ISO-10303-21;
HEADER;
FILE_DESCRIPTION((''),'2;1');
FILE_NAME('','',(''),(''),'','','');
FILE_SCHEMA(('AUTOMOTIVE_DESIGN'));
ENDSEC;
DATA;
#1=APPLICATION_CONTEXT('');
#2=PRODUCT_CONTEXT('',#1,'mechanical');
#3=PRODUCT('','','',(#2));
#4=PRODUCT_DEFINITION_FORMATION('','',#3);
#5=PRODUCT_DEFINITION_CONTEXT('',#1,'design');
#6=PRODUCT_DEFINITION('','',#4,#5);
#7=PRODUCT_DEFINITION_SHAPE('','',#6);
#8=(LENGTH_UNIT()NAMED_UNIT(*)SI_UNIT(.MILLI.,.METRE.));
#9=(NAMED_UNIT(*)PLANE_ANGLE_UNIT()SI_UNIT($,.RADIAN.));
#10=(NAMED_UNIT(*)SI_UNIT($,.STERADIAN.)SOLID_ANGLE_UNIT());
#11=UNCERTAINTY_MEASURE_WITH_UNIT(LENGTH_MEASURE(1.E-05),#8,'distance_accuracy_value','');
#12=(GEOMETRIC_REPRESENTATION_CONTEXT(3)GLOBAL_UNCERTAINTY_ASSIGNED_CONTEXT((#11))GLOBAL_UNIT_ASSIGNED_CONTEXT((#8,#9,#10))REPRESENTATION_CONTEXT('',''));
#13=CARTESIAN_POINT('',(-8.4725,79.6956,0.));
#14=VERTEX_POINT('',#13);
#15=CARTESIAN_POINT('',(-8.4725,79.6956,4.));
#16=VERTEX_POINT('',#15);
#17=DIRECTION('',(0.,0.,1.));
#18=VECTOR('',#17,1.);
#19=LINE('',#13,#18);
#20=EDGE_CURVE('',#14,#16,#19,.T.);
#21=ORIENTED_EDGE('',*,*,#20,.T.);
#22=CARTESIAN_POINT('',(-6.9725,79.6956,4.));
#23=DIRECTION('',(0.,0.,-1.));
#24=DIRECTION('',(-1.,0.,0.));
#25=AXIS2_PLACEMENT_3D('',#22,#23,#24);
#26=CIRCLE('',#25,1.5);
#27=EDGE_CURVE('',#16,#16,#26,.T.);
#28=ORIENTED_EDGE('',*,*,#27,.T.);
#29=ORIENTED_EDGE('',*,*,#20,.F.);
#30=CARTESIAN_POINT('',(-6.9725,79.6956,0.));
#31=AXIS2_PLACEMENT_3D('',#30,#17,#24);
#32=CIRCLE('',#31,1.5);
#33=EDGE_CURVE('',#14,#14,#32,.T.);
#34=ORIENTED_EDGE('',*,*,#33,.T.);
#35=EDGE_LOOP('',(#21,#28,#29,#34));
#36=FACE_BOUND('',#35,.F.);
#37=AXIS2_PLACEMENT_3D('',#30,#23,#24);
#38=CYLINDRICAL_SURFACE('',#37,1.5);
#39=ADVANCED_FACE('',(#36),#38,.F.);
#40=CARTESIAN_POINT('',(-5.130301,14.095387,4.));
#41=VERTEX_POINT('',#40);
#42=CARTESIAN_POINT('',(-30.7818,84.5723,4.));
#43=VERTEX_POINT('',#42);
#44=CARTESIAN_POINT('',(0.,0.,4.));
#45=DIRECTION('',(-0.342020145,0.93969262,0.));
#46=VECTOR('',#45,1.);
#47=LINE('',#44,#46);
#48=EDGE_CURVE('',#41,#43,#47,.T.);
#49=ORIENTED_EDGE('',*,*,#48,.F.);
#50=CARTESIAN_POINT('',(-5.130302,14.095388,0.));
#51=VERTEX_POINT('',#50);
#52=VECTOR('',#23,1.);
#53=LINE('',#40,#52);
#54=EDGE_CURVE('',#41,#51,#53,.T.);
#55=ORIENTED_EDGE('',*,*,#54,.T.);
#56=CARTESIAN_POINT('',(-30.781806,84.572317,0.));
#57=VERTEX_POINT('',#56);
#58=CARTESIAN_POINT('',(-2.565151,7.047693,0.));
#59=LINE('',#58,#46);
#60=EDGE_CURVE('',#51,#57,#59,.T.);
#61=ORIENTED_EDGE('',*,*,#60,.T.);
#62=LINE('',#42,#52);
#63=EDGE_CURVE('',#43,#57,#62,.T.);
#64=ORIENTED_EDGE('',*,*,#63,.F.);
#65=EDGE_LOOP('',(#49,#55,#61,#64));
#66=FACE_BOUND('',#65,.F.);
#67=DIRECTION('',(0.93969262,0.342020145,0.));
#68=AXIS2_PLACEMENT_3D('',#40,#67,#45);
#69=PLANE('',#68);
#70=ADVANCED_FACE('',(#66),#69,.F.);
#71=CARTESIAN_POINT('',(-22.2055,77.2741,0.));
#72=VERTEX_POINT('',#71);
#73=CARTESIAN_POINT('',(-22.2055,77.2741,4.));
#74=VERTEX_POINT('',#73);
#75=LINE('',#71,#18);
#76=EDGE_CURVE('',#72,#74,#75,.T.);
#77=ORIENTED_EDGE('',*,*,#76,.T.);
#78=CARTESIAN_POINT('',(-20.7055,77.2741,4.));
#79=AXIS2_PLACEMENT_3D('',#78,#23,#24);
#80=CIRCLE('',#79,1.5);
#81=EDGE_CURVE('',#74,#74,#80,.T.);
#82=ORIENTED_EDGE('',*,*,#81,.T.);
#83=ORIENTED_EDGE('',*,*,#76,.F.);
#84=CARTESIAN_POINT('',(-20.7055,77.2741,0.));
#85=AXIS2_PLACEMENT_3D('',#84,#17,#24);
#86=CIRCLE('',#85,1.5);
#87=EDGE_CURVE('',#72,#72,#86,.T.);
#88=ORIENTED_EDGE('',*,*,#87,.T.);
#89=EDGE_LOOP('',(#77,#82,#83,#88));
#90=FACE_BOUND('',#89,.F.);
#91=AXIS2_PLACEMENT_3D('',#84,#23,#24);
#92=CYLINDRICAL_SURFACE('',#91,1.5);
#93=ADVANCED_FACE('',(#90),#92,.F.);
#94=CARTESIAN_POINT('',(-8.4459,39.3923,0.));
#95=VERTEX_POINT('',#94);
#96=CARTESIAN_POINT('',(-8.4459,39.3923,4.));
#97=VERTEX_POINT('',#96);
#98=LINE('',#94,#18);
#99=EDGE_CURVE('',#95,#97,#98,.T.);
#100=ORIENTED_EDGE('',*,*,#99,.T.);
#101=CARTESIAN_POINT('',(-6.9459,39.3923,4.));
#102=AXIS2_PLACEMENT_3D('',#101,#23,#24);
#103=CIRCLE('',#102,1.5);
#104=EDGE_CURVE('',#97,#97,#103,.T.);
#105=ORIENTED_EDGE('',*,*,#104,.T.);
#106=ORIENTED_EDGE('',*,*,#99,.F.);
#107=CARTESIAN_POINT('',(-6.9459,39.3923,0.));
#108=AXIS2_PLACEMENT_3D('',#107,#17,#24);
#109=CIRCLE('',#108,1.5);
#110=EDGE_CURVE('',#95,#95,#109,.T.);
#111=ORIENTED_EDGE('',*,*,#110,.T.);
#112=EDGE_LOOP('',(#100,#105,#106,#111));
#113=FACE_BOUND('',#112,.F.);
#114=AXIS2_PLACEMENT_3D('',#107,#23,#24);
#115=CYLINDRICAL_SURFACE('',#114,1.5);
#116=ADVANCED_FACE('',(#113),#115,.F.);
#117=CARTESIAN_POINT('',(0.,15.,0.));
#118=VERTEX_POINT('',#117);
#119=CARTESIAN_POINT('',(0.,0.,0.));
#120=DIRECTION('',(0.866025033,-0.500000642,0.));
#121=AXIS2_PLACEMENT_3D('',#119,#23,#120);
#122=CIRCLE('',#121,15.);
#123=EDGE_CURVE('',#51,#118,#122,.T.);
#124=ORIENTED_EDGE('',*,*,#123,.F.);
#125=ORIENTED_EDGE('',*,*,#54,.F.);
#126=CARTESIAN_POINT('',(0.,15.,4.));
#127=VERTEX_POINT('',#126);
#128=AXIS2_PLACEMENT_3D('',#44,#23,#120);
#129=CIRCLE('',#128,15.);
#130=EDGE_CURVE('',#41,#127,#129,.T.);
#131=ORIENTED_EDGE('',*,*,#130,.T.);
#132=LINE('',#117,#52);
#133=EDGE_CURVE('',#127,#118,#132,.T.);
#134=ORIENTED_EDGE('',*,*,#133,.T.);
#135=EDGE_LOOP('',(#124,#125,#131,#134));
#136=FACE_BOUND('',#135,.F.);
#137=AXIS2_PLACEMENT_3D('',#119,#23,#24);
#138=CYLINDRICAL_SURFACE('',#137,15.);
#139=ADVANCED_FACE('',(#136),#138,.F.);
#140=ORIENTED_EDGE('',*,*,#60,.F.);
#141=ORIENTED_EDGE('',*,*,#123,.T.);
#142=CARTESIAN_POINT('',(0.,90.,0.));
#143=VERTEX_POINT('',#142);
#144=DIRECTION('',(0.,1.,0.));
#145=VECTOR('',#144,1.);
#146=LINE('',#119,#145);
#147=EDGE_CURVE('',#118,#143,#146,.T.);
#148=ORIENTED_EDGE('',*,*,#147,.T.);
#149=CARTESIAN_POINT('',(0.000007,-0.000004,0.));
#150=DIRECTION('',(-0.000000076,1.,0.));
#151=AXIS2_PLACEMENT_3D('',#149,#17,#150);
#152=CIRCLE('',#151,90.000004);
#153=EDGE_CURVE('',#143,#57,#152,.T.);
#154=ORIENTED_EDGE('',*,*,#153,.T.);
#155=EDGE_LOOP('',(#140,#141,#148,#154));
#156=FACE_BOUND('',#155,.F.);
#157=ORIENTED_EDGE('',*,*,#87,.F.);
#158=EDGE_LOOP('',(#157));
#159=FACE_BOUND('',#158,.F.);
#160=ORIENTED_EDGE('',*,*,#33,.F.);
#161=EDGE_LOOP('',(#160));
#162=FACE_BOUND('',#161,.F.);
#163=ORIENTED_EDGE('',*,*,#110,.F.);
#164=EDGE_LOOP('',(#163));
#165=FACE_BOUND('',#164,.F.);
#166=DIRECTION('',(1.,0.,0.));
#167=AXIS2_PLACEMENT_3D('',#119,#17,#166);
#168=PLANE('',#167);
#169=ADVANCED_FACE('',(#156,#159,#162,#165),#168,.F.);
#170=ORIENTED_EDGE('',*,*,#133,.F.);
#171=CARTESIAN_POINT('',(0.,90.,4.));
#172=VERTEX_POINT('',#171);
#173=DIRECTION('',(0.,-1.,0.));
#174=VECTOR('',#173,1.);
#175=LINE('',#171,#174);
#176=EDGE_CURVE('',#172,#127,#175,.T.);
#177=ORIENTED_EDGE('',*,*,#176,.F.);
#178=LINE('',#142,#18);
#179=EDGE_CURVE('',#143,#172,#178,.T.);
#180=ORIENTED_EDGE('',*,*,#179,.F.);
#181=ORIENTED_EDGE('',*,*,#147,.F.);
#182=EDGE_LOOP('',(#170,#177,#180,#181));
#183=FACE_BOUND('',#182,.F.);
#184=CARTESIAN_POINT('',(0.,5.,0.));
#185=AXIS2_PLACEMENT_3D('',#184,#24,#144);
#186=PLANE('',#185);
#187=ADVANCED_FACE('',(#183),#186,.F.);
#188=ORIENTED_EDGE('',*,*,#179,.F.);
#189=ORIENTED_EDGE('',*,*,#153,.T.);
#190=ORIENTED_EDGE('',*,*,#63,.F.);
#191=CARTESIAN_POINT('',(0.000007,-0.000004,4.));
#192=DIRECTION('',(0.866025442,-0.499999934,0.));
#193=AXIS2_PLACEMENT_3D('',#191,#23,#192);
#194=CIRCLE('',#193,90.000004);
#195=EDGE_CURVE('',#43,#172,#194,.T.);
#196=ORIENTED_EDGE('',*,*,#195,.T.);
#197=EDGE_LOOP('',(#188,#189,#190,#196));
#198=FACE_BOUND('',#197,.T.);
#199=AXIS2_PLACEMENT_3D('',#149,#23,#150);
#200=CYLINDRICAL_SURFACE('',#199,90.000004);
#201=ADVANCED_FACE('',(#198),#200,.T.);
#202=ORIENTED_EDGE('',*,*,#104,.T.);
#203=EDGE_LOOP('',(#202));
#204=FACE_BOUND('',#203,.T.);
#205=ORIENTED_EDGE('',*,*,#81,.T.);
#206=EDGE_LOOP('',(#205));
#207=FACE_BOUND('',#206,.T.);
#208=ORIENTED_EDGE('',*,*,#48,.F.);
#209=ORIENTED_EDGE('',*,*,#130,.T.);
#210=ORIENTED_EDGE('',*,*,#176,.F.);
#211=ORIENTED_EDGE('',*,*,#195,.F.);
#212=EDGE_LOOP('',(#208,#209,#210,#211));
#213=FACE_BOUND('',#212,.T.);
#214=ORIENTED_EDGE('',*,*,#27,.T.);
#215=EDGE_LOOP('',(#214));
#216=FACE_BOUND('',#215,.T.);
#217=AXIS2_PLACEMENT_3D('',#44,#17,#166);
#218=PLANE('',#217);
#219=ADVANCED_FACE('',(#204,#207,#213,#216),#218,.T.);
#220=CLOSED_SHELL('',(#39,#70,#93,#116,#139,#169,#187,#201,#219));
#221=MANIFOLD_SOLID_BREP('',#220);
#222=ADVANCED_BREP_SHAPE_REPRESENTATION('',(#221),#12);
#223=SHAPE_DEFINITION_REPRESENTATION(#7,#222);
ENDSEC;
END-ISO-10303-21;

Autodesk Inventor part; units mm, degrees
ref_plane "YZ Plane" through (0, 0, 0) normal (1, 0, 0) x (0, 1, 0)
ref_plane "XZ Plane" through (0, 0, 0) normal (0, 1, 0) x (-1, 0, 0)
ref_plane "XY Plane" through (0, 0, 0) normal (0, 0, 1) x (1, 0, 0)
sketch "Sketch1" plane through (0, 0, 0) normal (0, 0, 1) x (1, 0, 0)
  arc A0 (0, 90) -> (77.9423, -45) centre (0, 0) ccw
  line L0 (0, 5) -> (0, 90)
  line L1 (77.9423, -45) -> (4.3301, -2.5)
  line L2 (0, 5) -> (0, 0)
  line L3 (0, 0) -> (4.3301, -2.5)
  line L4 (0, -167.6192) -> (0, 145.1192) projected
  dimension "d0" = 120
  dimension "d2" = 90
extrude "Extrusion1" add sketch "Sketch1" along normal blind 4
sketch "Sketch2" plane through (0, 0, 0) normal (0, 0, -1) x (-1, 0, 0)
  circle A0 centre (20.7055, 77.2741) radius 1.5
  circle A1 centre (6.9459, 39.3923) radius 1.5
  line L0 (0, 0) -> (0, 90) projected
  line L1 (20.7055, 77.2741) -> (0, 0)
  circle A2 centre (6.9725, 79.6956) radius 1.5
  line L2 (6.9725, 79.6956) -> (0, 0)
  line L3 (6.9459, 39.3923) -> (0, 0)
  dimension "d5" = 3
  dimension "d6" = 3
  dimension "d7" = 80
  dimension "d9" = 15
  dimension "d16" = 80
  dimension "d17" = 3
  dimension "d18" = 5
  dimension "d27" = 5
  dimension "d28" = 40
extrude "Extrusion2" cut sketch "Sketch2" against normal blind 10
pattern_circular "Circular Pattern1" count 12 over 220 about axis through (0, 0, 0) along (0, 0, 1) of "Extrusion2"
sketch "Sketch4" plane through (0, 0, 0) normal (0, 0, -1) x (-1, 0, 0)
  circle A0 centre (0, 0) radius 15
  dimension "d29" = 30
extrude "Extrusion4" cut sketch "Sketch4" against normal blind 10
sketch "Sketch5" plane through (0, 0, 4) normal (0, 0, 1) x (1, 0, 0)
  arc A0 (0, 15) -> (12.9904, -7.5) centre (0, 0) ccw projected
  line L0 (0, 0) -> (-30.7818, 84.5723)
  arc A1 (0, 90) -> (77.9423, -45) centre (0, 0) ccw projected
  line L1 (0, 0) -> (77.9423, -45)
  arc A2 (-30.7818, 84.5723) -> (77.9423, -45) centre (0, 0) ccw
  line L2 (0, 15) -> (0, 90) projected
  point P0 (12.9904, -7.5)
  point P1 (-5.1303, 14.0954)
  dimension "d32" = 20
extrude "Extrusion5" cut sketch "Sketch5" against normal blind 10 contours A0 L1 A1 L0
properties part number "cover2"
